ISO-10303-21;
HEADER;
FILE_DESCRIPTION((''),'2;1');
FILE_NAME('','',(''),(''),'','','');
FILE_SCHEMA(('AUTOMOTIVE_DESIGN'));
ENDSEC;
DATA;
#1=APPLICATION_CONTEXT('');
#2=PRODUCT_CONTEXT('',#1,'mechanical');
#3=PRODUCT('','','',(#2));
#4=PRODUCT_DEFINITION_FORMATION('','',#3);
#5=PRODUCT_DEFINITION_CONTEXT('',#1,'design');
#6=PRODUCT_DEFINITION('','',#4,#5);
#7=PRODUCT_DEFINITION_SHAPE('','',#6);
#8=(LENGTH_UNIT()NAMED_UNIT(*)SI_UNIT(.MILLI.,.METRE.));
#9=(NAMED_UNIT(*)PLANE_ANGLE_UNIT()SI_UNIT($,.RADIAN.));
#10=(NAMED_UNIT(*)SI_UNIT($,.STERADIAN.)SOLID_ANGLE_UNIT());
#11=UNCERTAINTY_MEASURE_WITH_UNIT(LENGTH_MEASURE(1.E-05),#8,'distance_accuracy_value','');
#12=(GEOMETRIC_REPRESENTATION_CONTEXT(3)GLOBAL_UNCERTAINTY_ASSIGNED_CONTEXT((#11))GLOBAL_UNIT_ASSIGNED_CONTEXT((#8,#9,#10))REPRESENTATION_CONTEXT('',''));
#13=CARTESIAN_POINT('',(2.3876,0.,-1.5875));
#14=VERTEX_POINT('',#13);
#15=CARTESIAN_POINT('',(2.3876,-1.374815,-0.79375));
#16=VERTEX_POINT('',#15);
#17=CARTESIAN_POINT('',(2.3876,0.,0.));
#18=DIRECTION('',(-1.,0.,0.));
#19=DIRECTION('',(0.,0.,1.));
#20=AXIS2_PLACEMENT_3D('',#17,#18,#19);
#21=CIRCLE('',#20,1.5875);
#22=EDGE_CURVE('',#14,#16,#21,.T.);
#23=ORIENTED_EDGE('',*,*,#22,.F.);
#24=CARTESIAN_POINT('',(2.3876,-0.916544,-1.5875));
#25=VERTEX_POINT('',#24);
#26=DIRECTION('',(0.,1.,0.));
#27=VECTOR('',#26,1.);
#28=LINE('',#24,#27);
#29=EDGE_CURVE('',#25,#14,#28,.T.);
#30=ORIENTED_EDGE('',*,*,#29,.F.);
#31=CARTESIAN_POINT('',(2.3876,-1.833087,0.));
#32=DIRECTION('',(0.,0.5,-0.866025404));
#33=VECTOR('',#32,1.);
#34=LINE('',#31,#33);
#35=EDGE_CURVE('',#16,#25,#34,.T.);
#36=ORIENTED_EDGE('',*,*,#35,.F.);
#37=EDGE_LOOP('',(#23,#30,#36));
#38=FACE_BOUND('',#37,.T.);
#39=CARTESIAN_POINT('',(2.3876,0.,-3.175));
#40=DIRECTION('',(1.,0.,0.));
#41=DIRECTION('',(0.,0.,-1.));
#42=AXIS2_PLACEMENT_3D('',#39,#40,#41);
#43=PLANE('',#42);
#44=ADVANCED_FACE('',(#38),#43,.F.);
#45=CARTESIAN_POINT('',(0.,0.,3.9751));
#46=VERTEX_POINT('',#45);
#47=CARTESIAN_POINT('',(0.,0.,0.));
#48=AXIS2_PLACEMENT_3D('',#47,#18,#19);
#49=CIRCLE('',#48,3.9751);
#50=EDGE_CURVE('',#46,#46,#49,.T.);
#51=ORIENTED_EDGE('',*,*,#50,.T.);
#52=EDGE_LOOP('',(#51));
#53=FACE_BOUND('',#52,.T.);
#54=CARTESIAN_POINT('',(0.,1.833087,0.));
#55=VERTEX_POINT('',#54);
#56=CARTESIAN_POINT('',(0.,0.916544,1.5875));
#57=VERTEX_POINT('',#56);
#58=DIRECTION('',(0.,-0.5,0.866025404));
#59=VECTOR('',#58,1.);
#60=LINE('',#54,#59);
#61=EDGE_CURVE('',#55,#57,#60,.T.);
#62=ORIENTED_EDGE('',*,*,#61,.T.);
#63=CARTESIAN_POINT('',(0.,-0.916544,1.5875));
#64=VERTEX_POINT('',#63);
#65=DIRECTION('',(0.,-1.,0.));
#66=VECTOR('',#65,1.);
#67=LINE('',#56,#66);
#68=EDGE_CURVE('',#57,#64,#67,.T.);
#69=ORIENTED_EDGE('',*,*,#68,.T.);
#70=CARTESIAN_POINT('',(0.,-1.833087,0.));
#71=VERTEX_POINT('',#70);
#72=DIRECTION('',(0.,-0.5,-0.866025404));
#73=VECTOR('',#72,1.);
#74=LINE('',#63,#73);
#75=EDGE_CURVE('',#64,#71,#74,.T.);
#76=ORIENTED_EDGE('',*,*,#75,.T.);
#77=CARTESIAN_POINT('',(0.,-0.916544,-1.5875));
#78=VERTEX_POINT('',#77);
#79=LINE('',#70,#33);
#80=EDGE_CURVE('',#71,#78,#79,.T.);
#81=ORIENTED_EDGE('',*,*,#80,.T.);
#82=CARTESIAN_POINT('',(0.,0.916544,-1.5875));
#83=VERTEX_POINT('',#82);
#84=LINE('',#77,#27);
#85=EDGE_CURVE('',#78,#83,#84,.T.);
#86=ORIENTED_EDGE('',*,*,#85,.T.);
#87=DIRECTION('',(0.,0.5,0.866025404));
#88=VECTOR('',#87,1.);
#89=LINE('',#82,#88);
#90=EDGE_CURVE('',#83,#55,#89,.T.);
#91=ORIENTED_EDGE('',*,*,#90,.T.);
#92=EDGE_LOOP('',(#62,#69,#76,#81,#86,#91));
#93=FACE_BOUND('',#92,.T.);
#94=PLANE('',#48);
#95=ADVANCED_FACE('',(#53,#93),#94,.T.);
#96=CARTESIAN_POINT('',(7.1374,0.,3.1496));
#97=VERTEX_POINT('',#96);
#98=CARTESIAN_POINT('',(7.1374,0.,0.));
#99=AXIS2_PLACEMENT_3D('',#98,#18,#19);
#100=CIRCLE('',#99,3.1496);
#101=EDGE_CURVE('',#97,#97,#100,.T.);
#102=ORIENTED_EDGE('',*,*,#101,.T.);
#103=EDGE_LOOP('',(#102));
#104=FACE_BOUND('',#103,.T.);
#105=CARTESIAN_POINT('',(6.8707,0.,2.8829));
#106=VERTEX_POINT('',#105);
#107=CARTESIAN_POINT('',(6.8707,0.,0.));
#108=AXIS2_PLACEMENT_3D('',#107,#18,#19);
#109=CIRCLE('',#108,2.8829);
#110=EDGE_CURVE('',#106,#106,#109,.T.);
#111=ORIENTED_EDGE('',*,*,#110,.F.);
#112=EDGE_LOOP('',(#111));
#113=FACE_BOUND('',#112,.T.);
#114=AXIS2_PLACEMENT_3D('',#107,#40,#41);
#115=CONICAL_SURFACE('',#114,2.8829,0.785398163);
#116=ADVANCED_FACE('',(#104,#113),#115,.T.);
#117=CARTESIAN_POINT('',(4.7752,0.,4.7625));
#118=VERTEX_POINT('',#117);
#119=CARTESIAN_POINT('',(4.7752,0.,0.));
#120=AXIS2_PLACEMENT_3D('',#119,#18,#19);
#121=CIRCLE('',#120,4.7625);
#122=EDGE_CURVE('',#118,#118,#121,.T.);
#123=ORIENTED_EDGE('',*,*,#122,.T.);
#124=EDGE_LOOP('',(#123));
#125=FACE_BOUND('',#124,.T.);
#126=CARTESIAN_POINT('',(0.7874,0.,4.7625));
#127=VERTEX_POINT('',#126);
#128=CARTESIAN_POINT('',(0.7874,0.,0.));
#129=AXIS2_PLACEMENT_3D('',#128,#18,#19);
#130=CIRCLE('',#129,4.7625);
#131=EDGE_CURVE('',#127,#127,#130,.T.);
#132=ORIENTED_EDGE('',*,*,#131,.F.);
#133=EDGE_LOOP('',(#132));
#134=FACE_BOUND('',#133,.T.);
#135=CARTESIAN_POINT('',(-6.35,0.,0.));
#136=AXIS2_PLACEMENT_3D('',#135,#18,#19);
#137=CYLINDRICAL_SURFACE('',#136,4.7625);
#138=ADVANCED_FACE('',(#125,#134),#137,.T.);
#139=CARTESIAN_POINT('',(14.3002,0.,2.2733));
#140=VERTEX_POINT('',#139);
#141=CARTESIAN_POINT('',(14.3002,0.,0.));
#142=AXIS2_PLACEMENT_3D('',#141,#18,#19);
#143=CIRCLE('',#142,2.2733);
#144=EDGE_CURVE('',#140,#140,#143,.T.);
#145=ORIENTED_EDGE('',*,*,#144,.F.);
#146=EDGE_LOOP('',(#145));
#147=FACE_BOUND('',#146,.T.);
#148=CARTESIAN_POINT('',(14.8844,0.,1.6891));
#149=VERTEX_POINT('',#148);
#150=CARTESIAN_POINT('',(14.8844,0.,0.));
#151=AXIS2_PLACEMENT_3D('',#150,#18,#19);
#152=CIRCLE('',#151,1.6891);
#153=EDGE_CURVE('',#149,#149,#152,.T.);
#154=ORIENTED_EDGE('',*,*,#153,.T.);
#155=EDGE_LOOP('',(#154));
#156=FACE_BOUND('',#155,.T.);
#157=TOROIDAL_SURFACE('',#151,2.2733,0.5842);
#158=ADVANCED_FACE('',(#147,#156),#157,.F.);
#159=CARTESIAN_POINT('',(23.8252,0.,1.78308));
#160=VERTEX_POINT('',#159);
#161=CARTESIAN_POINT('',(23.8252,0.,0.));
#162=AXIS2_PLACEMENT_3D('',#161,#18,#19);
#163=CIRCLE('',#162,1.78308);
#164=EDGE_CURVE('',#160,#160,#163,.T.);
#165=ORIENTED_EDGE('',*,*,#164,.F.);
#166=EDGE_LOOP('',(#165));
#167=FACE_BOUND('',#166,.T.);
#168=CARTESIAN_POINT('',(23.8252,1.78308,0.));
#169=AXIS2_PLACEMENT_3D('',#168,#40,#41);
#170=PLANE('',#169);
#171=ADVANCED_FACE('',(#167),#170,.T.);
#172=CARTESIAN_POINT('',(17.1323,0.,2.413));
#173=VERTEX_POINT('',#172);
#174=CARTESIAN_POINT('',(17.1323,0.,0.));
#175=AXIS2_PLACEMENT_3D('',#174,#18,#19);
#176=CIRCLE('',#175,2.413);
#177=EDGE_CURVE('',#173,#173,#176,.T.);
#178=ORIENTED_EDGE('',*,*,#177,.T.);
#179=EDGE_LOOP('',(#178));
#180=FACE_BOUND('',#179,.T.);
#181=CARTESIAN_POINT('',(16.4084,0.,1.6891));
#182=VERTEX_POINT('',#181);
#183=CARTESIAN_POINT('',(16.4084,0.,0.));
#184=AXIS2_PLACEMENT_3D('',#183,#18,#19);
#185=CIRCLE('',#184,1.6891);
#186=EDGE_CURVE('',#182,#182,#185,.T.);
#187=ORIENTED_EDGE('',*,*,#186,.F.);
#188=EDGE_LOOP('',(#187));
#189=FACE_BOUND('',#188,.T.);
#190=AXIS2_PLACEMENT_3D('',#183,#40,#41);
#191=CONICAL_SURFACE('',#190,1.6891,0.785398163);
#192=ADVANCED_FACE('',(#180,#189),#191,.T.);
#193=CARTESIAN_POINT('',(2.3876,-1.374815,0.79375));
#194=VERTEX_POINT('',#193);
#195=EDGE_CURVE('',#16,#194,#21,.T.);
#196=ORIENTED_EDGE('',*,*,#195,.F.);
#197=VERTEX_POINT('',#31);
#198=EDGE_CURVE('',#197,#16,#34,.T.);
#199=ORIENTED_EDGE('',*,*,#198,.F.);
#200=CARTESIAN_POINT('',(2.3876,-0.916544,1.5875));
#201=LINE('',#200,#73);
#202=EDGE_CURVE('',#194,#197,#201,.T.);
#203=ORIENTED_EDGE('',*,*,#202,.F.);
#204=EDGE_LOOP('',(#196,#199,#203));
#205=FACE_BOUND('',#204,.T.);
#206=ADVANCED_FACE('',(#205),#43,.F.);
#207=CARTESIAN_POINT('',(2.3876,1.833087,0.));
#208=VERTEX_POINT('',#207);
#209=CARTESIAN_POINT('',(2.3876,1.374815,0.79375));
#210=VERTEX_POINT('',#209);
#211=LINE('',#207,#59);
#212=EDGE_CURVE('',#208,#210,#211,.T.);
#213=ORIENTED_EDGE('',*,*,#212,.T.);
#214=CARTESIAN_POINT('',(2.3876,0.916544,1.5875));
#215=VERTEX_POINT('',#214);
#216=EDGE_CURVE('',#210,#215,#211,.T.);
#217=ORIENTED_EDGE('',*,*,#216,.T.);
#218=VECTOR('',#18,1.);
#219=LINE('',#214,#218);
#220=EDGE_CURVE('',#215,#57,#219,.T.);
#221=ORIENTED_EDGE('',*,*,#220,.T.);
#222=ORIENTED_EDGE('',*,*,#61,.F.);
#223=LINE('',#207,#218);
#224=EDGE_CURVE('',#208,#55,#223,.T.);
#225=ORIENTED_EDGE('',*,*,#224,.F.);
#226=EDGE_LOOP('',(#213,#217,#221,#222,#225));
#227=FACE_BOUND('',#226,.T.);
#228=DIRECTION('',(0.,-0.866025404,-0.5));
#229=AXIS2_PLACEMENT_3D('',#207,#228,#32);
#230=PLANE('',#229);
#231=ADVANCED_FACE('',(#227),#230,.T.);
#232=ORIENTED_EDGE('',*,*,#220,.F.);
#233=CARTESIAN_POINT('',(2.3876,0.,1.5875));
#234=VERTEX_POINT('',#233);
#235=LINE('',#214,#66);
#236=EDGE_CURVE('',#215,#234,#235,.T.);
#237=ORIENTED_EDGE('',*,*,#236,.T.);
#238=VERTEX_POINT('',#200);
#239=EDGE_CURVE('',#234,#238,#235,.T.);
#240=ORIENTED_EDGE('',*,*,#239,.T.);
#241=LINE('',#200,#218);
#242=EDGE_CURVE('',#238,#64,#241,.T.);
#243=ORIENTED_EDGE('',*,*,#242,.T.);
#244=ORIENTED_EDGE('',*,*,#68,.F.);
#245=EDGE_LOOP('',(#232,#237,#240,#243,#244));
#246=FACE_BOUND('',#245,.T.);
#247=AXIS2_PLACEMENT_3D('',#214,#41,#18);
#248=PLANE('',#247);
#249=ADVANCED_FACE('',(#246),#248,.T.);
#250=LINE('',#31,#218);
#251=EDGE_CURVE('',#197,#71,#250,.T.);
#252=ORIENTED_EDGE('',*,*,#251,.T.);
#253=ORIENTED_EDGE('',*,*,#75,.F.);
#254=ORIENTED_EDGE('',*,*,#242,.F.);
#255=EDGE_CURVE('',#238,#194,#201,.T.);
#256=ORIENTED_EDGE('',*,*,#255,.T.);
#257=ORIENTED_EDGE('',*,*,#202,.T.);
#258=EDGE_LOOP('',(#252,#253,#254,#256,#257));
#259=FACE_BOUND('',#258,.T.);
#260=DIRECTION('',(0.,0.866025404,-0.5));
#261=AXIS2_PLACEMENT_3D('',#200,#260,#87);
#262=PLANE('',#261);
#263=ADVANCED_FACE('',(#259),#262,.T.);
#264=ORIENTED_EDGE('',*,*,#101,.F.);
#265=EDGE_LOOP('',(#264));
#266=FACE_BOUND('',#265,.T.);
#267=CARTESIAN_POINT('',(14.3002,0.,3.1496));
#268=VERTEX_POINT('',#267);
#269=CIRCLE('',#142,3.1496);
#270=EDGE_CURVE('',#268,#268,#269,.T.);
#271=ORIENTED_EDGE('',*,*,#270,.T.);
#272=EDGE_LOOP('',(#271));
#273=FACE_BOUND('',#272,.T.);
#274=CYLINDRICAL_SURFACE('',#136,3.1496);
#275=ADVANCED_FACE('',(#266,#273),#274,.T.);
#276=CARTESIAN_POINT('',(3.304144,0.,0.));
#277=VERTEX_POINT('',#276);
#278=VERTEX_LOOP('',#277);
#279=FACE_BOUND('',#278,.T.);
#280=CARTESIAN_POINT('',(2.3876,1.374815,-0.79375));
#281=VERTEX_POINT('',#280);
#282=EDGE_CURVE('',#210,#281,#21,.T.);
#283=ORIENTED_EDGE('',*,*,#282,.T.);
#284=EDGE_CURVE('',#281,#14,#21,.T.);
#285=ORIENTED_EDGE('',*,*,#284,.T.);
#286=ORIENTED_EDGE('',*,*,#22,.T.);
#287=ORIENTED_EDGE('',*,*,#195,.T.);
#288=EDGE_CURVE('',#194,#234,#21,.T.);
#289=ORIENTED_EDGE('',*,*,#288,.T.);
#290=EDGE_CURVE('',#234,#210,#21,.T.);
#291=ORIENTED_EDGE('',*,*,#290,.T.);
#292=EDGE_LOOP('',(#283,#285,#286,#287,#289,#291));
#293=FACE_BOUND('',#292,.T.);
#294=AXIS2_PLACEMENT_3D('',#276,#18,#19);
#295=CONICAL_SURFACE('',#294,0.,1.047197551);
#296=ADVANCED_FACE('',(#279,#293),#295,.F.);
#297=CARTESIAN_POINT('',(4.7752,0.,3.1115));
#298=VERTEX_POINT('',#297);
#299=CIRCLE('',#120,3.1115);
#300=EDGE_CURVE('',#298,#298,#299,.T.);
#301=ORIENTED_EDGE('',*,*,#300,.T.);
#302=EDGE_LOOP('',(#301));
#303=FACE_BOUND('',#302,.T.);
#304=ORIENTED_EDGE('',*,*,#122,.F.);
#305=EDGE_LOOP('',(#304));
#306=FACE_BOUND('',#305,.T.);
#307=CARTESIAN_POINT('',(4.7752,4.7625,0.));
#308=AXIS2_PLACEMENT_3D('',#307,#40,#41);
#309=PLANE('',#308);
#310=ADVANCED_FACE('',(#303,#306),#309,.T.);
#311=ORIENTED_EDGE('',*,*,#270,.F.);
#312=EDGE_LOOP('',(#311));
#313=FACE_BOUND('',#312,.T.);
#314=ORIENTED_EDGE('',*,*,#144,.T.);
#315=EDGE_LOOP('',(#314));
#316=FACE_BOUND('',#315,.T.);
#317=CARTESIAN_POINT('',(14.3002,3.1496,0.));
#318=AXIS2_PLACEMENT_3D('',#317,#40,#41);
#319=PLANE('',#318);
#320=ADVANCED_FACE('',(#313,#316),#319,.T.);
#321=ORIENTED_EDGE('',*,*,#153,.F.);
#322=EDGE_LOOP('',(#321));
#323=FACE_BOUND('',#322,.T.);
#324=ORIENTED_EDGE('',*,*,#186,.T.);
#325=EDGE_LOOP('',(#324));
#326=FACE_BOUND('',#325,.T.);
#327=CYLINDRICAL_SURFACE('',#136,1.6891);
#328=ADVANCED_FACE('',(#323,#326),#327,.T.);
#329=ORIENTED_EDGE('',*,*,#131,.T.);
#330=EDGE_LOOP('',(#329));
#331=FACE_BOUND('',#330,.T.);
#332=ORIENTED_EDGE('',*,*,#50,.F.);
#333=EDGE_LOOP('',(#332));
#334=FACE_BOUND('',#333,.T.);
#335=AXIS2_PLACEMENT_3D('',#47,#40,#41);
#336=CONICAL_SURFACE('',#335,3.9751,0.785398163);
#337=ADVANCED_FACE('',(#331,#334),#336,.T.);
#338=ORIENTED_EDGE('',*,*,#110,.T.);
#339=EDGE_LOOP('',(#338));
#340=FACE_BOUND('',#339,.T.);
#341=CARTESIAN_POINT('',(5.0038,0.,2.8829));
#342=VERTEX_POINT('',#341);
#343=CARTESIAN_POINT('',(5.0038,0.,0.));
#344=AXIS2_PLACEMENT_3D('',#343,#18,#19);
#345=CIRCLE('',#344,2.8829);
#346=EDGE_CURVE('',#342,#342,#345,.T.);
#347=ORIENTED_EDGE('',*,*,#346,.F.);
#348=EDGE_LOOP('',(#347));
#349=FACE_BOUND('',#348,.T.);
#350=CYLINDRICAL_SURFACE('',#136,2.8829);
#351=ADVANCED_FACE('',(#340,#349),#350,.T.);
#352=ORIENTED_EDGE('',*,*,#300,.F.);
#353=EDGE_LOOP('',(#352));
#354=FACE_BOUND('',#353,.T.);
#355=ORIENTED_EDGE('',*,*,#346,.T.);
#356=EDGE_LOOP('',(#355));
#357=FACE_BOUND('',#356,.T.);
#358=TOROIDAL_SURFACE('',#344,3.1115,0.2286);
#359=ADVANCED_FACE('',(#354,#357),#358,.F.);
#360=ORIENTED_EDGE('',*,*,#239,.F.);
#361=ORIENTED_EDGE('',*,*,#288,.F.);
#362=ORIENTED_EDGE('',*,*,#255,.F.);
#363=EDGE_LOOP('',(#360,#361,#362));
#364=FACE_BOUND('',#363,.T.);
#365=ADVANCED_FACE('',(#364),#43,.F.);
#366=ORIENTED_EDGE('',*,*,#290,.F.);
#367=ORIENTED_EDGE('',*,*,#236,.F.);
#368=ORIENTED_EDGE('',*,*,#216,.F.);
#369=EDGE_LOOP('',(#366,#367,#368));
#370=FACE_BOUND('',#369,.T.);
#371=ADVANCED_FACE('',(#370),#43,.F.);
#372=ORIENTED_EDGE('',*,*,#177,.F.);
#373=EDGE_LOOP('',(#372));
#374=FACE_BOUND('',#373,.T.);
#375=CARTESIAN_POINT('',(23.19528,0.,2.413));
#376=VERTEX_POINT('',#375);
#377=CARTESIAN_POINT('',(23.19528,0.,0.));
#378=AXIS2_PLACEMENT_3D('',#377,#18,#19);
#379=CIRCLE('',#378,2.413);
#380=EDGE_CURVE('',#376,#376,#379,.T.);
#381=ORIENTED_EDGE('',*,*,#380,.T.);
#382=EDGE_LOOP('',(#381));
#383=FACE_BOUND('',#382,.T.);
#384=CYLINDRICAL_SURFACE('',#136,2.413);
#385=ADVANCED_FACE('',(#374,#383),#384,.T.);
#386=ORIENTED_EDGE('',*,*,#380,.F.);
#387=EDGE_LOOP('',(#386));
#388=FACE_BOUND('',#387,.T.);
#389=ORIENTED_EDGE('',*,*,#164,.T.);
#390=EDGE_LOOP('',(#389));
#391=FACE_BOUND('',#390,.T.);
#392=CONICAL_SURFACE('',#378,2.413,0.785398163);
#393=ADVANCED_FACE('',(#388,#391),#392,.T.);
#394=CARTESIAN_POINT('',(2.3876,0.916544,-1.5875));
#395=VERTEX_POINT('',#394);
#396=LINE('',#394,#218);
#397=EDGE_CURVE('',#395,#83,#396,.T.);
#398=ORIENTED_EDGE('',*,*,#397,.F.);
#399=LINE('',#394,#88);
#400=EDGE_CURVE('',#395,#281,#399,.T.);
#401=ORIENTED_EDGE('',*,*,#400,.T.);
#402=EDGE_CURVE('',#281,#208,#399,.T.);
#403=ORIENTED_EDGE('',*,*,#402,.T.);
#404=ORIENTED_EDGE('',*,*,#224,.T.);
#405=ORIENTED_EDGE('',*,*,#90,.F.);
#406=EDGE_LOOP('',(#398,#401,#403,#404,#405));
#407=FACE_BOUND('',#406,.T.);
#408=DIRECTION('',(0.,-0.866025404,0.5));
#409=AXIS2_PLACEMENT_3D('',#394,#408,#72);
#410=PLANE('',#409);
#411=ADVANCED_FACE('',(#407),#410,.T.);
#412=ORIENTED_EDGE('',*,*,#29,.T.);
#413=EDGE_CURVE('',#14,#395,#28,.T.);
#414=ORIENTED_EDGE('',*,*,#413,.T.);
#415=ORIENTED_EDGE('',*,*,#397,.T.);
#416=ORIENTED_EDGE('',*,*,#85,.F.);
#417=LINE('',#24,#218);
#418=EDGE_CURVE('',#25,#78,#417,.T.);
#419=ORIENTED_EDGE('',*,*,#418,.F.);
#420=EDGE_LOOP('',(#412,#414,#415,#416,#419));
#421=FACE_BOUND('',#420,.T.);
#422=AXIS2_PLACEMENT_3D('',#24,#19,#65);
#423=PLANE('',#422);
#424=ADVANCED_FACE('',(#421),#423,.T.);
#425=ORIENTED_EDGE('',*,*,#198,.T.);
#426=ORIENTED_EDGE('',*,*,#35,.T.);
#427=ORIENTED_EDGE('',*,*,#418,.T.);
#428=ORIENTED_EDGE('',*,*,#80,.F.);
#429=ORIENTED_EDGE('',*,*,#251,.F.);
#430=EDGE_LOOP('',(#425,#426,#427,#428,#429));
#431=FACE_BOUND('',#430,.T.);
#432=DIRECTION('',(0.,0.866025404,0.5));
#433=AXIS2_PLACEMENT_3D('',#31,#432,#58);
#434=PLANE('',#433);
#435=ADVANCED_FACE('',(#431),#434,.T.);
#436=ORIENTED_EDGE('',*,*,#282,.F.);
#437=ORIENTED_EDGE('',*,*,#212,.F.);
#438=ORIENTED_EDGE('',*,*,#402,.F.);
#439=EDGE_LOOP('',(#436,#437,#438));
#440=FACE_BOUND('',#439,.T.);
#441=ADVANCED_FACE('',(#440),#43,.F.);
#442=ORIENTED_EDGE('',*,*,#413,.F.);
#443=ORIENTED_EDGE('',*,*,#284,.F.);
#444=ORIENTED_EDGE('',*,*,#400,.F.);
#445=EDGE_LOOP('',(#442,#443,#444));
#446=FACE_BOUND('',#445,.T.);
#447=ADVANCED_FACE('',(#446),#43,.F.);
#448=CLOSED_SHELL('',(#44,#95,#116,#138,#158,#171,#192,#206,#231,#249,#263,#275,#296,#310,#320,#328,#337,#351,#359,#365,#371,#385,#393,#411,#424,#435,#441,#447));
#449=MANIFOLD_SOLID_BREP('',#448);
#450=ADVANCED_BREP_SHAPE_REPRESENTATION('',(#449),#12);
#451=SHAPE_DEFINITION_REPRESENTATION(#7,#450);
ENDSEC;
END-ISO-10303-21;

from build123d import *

# Parameters (mm, degrees)
HEX_2_DEPTH = 2.3876


# Read off the part's stored shape, not the designer's step: ThreadSchematic
with BuildPart() as part:
    # ThreadSchematic outline → ThreadSchematic (revolve)
    with BuildSketch(Plane.YX):
        with BuildLine():
            Line((0, 23.8252), (0, 0))
            Line((0, 0), (3.9751, 0))
            Line((3.9751, 0), (4.7625, 0.7874))
            Line((4.7625, 0.7874), (4.7625, 4.7752))
            Line((4.7625, 4.7752), (3.1115, 4.7752))
            ThreePointArc((3.1115, 4.7752), (2.94985539, 4.84215539), (2.8829, 5.0038))
            Line((2.8829, 5.0038), (2.8829, 6.8707))
            Line((2.8829, 6.8707), (3.1496, 7.1374))
            Line((3.1496, 7.1374), (3.1496, 14.3002))
            Line((3.1496, 14.3002), (2.2733, 14.3002))
            ThreePointArc((2.2733, 14.3002), (1.860208218, 14.471308218), (1.6891, 14.8844))
            Line((1.6891, 14.8844), (1.6891, 16.4084))
            Line((1.6891, 16.4084), (2.413, 17.1323))
            Line((2.413, 17.1323), (2.413, 23.19528))
            Line((2.413, 23.19528), (1.78308, 23.8252))
            Line((1.78308, 23.8252), (0, 23.8252))
        make_face()
    revolve(axis=Axis((0, 0, 0), (1, 0, 0)))

    # Sketch2 → PreBroach (revolve, cut)
    with BuildSketch(Plane.XY, mode=Mode.PRIVATE) as prebroach_sk:
        Polygon((0, 1.5875), (2.3876, 1.5875), (3.304143552, 0), (0, 0), align=None)
    revolve(prebroach_sk.sketch.rotate(Axis((0, 0, 0), (1, 0, 0)), 90), axis=Axis((0, 0, 0), (1, 0, 0)), mode=Mode.SUBTRACT)

    # Sketch3 → Hex 2 (cut)
    with BuildSketch(Plane.ZY):
        Polygon((-1.5875, -0.916543552), (-1.5875, 0.916543552), (0, 1.833087105), (1.5875, 0.916543552), (1.5875, -0.916543552), (0, -1.833087105), align=None)
    extrude(amount=-HEX_2_DEPTH, mode=Mode.SUBTRACT)


solid = part.part
